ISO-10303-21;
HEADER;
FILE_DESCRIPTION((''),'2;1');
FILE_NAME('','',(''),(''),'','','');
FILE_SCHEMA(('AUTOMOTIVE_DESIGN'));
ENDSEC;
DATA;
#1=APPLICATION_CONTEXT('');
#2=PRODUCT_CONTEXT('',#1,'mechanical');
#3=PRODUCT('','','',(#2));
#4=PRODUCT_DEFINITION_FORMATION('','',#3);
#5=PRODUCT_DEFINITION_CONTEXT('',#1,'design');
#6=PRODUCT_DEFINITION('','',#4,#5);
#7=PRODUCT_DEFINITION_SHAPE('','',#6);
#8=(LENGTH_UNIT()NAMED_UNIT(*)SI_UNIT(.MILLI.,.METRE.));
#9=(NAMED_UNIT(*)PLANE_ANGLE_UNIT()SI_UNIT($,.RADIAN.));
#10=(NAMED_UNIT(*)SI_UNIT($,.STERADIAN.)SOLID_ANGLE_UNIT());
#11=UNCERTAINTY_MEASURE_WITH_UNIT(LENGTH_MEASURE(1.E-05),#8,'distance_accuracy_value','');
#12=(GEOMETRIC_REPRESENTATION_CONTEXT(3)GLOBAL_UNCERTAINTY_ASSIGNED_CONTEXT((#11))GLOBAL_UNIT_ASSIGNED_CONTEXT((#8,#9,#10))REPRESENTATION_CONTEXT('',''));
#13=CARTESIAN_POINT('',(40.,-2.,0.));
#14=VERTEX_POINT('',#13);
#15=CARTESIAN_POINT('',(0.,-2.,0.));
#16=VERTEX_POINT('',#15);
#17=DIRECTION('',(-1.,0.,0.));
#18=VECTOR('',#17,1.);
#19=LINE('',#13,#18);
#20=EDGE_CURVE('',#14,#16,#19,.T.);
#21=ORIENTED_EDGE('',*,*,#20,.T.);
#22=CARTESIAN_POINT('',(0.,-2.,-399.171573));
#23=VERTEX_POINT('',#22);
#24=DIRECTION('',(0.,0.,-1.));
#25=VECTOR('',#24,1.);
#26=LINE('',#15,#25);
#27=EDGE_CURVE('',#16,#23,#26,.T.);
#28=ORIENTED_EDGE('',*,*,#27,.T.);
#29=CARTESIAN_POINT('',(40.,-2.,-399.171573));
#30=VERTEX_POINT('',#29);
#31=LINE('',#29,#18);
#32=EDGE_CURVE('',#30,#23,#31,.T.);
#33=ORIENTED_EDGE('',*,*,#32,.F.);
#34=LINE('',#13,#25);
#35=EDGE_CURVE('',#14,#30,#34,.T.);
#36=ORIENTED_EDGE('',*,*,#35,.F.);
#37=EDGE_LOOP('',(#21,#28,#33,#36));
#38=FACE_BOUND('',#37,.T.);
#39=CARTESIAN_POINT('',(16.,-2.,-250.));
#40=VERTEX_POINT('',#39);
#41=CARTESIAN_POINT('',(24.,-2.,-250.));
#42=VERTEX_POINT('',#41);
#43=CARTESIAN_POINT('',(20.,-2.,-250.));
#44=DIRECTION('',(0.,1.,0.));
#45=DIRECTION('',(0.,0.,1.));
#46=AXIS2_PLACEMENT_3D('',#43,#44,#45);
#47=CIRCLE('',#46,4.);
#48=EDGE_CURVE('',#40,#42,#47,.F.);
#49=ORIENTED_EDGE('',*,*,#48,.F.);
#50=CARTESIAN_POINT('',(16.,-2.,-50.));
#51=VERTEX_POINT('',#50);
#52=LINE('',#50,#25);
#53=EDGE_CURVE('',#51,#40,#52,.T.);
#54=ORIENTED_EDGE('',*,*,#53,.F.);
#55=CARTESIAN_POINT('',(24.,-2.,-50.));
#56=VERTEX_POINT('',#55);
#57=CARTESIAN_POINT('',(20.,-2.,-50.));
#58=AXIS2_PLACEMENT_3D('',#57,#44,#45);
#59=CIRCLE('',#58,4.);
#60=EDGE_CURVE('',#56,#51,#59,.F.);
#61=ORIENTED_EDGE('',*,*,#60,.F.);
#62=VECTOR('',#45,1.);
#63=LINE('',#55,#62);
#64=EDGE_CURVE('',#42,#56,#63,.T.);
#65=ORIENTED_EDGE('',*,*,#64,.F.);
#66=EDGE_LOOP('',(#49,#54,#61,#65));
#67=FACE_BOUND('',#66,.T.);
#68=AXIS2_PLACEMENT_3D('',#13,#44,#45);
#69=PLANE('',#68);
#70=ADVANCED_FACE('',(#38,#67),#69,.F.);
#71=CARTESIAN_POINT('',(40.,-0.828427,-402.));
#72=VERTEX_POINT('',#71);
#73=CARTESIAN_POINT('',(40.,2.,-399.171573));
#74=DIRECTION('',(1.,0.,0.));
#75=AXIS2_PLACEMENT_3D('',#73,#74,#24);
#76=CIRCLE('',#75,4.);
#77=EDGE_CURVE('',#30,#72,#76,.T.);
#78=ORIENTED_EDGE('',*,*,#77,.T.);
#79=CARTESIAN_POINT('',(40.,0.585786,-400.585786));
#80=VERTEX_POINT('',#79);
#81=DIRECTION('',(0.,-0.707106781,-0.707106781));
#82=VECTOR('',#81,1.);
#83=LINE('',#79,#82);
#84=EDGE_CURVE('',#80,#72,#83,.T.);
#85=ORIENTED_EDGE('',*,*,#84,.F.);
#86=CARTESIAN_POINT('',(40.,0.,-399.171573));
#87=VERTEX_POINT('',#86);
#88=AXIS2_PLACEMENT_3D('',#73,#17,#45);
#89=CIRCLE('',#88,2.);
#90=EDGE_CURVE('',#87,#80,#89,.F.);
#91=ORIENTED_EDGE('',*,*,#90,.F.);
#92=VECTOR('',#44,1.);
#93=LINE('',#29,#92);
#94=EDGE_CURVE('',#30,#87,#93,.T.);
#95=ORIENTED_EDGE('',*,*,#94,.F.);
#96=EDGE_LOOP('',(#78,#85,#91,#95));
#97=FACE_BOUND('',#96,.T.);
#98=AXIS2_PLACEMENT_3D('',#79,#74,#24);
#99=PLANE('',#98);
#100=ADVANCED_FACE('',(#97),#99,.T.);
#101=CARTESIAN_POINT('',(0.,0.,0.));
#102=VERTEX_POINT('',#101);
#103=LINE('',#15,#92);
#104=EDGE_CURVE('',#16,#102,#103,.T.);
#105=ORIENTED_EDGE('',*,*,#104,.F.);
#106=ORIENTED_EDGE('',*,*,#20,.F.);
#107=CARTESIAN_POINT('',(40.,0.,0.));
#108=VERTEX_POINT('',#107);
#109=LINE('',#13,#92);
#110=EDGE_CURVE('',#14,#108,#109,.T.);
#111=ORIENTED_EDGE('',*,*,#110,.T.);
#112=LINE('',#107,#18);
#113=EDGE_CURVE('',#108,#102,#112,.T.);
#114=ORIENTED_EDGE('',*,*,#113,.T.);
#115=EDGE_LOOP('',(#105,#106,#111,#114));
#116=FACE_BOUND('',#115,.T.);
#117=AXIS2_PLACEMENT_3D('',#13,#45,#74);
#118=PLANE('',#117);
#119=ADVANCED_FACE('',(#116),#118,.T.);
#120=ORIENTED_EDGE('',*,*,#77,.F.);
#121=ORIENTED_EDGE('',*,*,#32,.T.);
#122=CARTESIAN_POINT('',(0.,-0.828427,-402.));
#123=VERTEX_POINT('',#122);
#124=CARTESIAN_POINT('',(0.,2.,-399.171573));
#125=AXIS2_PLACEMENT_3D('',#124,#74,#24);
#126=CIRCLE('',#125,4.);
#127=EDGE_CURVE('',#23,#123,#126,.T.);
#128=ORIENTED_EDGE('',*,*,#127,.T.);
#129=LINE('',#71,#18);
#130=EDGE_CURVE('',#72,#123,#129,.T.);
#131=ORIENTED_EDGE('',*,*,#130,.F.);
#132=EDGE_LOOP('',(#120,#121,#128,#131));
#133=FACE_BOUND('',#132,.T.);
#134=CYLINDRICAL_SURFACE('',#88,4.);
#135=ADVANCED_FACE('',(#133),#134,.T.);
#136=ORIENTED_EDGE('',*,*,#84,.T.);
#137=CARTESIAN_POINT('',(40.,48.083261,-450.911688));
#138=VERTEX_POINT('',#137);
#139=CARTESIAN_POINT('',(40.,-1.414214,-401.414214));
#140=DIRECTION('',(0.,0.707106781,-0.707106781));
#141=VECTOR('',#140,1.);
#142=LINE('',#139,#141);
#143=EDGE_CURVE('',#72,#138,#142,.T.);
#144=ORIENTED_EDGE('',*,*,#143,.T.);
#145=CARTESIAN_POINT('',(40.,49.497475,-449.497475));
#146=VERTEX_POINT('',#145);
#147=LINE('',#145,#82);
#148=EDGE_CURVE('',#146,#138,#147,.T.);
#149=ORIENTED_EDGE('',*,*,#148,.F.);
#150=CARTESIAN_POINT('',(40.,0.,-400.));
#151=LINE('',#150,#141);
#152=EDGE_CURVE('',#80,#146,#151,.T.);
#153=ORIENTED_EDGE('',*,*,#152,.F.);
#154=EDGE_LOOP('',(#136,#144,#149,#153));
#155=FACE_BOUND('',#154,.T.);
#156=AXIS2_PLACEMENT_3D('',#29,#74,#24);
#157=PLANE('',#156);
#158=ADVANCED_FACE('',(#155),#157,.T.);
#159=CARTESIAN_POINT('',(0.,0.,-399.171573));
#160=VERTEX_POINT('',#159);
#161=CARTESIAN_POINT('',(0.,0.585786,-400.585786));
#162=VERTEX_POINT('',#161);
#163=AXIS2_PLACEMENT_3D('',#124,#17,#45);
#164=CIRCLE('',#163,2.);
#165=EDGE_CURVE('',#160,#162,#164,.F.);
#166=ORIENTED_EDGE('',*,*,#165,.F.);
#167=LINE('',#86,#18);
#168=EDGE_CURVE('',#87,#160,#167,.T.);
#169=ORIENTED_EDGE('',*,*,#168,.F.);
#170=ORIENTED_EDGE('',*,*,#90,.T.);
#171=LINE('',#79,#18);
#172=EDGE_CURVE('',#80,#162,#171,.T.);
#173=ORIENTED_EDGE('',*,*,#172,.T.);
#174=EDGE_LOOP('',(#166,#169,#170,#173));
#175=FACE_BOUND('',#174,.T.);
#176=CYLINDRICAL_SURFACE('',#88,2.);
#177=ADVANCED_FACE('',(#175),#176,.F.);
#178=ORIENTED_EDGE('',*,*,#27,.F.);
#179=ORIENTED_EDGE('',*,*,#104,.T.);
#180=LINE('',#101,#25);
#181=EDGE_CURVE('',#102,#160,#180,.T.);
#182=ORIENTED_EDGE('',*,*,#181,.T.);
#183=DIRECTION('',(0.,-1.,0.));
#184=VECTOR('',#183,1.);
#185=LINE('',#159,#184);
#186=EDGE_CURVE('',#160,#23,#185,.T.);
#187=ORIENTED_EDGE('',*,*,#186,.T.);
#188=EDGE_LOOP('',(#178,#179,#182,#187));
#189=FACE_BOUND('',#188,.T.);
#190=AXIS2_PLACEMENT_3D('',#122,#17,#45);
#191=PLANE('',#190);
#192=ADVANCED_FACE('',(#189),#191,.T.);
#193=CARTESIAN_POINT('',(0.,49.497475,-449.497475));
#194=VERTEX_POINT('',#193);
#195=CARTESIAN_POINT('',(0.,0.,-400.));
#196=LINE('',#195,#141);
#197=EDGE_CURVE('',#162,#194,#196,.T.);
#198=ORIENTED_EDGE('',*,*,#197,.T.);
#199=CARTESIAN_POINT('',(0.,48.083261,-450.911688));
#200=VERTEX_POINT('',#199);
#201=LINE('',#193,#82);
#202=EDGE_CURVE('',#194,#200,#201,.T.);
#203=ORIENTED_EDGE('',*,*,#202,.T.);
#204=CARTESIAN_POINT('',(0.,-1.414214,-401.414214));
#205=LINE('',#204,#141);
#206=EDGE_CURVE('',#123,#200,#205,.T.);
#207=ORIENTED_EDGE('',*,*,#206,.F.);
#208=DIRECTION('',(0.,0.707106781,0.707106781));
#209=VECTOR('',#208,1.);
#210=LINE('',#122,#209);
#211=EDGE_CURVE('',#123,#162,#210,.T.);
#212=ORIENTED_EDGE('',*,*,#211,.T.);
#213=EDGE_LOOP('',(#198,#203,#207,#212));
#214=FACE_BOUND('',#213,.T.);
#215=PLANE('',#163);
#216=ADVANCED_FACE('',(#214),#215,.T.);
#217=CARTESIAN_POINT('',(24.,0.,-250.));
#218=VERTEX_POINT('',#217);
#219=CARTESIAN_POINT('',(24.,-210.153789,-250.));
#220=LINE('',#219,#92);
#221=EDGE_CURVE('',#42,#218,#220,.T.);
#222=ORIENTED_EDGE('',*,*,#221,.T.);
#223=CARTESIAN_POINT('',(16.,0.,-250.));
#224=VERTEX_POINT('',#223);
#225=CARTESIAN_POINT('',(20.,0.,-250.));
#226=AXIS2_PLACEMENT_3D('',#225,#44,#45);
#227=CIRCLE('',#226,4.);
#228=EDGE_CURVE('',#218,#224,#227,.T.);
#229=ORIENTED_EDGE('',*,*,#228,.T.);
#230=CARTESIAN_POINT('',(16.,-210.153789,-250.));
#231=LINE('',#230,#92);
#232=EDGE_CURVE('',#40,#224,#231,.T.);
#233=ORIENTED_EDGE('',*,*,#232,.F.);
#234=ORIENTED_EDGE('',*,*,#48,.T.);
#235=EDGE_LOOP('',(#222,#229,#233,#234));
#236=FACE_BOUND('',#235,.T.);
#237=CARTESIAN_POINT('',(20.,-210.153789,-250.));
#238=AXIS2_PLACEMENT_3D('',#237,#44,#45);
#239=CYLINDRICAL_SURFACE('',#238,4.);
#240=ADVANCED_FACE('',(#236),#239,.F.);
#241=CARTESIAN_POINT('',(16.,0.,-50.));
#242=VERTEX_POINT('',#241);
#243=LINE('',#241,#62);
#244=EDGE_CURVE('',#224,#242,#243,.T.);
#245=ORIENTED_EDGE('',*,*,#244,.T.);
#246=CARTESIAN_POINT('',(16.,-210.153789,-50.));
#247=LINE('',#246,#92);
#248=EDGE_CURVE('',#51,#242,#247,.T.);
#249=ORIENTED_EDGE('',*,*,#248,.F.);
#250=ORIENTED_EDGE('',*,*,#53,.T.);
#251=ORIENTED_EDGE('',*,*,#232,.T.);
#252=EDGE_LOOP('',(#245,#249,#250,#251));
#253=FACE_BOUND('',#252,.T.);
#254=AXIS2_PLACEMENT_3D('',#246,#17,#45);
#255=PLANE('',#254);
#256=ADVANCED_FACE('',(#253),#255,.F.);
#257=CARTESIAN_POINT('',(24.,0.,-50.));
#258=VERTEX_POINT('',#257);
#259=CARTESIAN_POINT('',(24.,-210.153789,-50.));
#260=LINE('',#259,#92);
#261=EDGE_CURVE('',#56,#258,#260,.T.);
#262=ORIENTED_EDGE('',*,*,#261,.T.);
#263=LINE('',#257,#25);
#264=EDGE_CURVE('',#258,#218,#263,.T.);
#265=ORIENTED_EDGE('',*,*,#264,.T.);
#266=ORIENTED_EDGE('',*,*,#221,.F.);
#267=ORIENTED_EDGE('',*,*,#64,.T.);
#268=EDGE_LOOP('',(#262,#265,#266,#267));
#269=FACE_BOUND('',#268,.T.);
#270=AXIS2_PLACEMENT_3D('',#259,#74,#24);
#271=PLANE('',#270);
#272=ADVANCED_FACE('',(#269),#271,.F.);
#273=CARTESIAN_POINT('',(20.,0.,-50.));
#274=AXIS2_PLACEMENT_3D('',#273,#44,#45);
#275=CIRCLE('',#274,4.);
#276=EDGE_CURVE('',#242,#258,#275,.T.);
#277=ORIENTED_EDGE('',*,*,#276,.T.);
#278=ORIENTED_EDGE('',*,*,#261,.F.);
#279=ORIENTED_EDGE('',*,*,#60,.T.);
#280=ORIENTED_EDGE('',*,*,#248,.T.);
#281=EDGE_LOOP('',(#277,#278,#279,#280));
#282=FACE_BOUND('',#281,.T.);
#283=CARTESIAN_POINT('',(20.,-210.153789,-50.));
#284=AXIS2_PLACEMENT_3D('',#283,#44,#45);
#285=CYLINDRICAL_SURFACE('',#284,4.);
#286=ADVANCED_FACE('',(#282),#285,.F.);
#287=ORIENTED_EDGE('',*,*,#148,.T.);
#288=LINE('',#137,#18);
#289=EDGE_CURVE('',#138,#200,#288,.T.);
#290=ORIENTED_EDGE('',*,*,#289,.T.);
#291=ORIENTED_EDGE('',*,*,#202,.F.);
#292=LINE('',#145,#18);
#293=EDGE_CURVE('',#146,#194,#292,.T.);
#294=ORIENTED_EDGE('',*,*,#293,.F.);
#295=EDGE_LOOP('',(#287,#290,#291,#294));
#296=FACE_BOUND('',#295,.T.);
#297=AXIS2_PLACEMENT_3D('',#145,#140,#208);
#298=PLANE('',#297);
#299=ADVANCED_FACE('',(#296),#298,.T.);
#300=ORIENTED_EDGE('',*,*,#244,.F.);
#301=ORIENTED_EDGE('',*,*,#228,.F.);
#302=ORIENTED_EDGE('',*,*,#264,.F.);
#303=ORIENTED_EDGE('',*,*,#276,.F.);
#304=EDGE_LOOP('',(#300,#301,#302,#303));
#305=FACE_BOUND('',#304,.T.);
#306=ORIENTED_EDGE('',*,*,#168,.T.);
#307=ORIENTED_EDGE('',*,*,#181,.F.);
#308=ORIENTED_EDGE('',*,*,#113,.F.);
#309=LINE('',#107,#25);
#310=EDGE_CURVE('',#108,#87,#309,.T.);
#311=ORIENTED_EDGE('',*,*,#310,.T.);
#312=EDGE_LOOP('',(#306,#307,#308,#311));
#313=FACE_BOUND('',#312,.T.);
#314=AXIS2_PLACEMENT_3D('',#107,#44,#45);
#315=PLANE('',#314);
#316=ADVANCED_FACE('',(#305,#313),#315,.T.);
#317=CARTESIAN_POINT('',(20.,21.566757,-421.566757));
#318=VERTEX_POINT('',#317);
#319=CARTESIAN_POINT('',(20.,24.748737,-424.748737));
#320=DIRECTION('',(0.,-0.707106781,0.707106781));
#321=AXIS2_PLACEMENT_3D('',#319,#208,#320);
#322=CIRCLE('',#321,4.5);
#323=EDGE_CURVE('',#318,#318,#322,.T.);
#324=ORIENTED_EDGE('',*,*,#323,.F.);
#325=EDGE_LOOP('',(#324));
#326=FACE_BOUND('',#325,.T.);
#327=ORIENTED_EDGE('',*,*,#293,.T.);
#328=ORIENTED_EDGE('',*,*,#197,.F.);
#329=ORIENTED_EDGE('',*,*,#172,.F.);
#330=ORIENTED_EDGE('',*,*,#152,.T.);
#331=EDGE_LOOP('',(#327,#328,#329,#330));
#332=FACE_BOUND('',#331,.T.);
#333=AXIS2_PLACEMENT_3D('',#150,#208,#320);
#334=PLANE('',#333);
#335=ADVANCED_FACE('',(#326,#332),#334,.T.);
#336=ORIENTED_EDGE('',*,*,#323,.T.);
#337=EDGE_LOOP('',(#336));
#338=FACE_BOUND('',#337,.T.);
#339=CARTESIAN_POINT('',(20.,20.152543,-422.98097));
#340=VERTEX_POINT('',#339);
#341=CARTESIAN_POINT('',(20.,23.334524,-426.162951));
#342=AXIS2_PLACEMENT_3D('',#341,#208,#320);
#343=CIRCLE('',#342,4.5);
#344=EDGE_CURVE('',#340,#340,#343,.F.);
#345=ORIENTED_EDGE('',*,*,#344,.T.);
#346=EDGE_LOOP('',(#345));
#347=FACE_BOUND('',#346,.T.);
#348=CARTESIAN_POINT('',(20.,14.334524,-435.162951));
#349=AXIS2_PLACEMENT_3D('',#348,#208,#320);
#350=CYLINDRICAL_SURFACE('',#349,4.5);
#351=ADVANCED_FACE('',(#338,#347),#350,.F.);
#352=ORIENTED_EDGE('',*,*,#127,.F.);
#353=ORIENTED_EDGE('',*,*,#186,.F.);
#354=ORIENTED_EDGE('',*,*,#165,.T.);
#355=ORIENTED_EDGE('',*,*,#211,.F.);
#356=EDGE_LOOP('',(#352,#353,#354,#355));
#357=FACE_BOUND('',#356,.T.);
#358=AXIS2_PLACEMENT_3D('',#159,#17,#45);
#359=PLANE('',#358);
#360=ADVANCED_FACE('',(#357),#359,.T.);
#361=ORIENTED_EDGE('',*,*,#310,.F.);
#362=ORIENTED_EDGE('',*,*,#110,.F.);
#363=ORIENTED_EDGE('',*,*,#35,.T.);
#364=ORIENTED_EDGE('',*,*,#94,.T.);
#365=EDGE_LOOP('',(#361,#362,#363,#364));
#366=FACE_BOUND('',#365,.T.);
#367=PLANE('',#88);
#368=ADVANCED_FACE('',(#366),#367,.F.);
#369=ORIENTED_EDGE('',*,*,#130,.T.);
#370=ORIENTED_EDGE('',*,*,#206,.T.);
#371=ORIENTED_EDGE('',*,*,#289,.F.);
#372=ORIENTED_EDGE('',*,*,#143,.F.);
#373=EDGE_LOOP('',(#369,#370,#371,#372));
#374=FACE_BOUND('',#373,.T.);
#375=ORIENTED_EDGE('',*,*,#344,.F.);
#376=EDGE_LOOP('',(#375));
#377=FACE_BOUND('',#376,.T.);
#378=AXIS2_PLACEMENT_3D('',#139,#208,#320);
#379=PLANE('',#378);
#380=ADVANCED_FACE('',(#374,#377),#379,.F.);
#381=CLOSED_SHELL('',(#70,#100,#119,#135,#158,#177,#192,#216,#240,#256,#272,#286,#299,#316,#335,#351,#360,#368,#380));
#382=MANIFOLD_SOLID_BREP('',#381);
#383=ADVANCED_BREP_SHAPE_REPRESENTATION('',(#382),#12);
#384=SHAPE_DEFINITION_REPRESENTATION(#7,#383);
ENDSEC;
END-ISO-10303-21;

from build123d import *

# Parameters (mm, degrees)
BASE_FLANGE1_DEPTH = 40
SKETCH7_R          = 4.5
CUT_EXTRUDE1_DEPTH = 2
CUT_EXTRUDE2_DEPTH = 2


# Sheet-metal steps are written as plain solids
with BuildPart() as part:
    # Sketch1 → Base-Flange1 (new body)
    with BuildSketch(Plane(origin=(0, 0, 0), x_dir=(0, 0, -1), z_dir=(1, 0, 0))):
        with BuildLine():
            Line((0, 0), (399.171572875, 0))
            ThreePointArc((399.171572875, 0), (399.93693974, 0.152240935), (400.585786438, 0.585786438))
            Line((400.585786438, 0.585786438), (449.497474683, 49.497474683))
            Line((449.497474683, 49.497474683), (450.911688245, 48.083261121))
            Line((450.911688245, 48.083261121), (402, -0.828427125))
            ThreePointArc((402, -0.828427125), (400.702306605, -1.69551813), (399.171572875, -2))
            Line((399.171572875, -2), (0, -2))
            Line((0, -2), (0, 0))
        make_face()
    extrude(amount=BASE_FLANGE1_DEPTH)

    # Sketch7 → Cut-Extrude1 (cut)
    with BuildSketch(Plane(origin=(0, -200, -200), x_dir=(1, 0, 0), z_dir=(0, 0.7071067811865456, 0.7071067811865496))):
        with Locations(Location((20, 317.842712475, 0), (0, 0, 270))):
            Circle(SKETCH7_R)
    extrude(amount=-CUT_EXTRUDE1_DEPTH, mode=Mode.SUBTRACT)

    # Sketch8 → Cut-Extrude2 (cut)
    with BuildSketch(Plane(origin=(0, 0, 0), x_dir=(1, 0, 0), z_dir=(0, 1, 0))):
        with BuildLine():
            Line((24, 50), (24, 250))
            ThreePointArc((24, 250), (20, 254), (16, 250))
            Line((16, 250), (16, 50))
            ThreePointArc((16, 50), (20, 46), (24, 50))
        make_face()
    extrude(amount=-CUT_EXTRUDE2_DEPTH, mode=Mode.SUBTRACT)


solid = part.part
